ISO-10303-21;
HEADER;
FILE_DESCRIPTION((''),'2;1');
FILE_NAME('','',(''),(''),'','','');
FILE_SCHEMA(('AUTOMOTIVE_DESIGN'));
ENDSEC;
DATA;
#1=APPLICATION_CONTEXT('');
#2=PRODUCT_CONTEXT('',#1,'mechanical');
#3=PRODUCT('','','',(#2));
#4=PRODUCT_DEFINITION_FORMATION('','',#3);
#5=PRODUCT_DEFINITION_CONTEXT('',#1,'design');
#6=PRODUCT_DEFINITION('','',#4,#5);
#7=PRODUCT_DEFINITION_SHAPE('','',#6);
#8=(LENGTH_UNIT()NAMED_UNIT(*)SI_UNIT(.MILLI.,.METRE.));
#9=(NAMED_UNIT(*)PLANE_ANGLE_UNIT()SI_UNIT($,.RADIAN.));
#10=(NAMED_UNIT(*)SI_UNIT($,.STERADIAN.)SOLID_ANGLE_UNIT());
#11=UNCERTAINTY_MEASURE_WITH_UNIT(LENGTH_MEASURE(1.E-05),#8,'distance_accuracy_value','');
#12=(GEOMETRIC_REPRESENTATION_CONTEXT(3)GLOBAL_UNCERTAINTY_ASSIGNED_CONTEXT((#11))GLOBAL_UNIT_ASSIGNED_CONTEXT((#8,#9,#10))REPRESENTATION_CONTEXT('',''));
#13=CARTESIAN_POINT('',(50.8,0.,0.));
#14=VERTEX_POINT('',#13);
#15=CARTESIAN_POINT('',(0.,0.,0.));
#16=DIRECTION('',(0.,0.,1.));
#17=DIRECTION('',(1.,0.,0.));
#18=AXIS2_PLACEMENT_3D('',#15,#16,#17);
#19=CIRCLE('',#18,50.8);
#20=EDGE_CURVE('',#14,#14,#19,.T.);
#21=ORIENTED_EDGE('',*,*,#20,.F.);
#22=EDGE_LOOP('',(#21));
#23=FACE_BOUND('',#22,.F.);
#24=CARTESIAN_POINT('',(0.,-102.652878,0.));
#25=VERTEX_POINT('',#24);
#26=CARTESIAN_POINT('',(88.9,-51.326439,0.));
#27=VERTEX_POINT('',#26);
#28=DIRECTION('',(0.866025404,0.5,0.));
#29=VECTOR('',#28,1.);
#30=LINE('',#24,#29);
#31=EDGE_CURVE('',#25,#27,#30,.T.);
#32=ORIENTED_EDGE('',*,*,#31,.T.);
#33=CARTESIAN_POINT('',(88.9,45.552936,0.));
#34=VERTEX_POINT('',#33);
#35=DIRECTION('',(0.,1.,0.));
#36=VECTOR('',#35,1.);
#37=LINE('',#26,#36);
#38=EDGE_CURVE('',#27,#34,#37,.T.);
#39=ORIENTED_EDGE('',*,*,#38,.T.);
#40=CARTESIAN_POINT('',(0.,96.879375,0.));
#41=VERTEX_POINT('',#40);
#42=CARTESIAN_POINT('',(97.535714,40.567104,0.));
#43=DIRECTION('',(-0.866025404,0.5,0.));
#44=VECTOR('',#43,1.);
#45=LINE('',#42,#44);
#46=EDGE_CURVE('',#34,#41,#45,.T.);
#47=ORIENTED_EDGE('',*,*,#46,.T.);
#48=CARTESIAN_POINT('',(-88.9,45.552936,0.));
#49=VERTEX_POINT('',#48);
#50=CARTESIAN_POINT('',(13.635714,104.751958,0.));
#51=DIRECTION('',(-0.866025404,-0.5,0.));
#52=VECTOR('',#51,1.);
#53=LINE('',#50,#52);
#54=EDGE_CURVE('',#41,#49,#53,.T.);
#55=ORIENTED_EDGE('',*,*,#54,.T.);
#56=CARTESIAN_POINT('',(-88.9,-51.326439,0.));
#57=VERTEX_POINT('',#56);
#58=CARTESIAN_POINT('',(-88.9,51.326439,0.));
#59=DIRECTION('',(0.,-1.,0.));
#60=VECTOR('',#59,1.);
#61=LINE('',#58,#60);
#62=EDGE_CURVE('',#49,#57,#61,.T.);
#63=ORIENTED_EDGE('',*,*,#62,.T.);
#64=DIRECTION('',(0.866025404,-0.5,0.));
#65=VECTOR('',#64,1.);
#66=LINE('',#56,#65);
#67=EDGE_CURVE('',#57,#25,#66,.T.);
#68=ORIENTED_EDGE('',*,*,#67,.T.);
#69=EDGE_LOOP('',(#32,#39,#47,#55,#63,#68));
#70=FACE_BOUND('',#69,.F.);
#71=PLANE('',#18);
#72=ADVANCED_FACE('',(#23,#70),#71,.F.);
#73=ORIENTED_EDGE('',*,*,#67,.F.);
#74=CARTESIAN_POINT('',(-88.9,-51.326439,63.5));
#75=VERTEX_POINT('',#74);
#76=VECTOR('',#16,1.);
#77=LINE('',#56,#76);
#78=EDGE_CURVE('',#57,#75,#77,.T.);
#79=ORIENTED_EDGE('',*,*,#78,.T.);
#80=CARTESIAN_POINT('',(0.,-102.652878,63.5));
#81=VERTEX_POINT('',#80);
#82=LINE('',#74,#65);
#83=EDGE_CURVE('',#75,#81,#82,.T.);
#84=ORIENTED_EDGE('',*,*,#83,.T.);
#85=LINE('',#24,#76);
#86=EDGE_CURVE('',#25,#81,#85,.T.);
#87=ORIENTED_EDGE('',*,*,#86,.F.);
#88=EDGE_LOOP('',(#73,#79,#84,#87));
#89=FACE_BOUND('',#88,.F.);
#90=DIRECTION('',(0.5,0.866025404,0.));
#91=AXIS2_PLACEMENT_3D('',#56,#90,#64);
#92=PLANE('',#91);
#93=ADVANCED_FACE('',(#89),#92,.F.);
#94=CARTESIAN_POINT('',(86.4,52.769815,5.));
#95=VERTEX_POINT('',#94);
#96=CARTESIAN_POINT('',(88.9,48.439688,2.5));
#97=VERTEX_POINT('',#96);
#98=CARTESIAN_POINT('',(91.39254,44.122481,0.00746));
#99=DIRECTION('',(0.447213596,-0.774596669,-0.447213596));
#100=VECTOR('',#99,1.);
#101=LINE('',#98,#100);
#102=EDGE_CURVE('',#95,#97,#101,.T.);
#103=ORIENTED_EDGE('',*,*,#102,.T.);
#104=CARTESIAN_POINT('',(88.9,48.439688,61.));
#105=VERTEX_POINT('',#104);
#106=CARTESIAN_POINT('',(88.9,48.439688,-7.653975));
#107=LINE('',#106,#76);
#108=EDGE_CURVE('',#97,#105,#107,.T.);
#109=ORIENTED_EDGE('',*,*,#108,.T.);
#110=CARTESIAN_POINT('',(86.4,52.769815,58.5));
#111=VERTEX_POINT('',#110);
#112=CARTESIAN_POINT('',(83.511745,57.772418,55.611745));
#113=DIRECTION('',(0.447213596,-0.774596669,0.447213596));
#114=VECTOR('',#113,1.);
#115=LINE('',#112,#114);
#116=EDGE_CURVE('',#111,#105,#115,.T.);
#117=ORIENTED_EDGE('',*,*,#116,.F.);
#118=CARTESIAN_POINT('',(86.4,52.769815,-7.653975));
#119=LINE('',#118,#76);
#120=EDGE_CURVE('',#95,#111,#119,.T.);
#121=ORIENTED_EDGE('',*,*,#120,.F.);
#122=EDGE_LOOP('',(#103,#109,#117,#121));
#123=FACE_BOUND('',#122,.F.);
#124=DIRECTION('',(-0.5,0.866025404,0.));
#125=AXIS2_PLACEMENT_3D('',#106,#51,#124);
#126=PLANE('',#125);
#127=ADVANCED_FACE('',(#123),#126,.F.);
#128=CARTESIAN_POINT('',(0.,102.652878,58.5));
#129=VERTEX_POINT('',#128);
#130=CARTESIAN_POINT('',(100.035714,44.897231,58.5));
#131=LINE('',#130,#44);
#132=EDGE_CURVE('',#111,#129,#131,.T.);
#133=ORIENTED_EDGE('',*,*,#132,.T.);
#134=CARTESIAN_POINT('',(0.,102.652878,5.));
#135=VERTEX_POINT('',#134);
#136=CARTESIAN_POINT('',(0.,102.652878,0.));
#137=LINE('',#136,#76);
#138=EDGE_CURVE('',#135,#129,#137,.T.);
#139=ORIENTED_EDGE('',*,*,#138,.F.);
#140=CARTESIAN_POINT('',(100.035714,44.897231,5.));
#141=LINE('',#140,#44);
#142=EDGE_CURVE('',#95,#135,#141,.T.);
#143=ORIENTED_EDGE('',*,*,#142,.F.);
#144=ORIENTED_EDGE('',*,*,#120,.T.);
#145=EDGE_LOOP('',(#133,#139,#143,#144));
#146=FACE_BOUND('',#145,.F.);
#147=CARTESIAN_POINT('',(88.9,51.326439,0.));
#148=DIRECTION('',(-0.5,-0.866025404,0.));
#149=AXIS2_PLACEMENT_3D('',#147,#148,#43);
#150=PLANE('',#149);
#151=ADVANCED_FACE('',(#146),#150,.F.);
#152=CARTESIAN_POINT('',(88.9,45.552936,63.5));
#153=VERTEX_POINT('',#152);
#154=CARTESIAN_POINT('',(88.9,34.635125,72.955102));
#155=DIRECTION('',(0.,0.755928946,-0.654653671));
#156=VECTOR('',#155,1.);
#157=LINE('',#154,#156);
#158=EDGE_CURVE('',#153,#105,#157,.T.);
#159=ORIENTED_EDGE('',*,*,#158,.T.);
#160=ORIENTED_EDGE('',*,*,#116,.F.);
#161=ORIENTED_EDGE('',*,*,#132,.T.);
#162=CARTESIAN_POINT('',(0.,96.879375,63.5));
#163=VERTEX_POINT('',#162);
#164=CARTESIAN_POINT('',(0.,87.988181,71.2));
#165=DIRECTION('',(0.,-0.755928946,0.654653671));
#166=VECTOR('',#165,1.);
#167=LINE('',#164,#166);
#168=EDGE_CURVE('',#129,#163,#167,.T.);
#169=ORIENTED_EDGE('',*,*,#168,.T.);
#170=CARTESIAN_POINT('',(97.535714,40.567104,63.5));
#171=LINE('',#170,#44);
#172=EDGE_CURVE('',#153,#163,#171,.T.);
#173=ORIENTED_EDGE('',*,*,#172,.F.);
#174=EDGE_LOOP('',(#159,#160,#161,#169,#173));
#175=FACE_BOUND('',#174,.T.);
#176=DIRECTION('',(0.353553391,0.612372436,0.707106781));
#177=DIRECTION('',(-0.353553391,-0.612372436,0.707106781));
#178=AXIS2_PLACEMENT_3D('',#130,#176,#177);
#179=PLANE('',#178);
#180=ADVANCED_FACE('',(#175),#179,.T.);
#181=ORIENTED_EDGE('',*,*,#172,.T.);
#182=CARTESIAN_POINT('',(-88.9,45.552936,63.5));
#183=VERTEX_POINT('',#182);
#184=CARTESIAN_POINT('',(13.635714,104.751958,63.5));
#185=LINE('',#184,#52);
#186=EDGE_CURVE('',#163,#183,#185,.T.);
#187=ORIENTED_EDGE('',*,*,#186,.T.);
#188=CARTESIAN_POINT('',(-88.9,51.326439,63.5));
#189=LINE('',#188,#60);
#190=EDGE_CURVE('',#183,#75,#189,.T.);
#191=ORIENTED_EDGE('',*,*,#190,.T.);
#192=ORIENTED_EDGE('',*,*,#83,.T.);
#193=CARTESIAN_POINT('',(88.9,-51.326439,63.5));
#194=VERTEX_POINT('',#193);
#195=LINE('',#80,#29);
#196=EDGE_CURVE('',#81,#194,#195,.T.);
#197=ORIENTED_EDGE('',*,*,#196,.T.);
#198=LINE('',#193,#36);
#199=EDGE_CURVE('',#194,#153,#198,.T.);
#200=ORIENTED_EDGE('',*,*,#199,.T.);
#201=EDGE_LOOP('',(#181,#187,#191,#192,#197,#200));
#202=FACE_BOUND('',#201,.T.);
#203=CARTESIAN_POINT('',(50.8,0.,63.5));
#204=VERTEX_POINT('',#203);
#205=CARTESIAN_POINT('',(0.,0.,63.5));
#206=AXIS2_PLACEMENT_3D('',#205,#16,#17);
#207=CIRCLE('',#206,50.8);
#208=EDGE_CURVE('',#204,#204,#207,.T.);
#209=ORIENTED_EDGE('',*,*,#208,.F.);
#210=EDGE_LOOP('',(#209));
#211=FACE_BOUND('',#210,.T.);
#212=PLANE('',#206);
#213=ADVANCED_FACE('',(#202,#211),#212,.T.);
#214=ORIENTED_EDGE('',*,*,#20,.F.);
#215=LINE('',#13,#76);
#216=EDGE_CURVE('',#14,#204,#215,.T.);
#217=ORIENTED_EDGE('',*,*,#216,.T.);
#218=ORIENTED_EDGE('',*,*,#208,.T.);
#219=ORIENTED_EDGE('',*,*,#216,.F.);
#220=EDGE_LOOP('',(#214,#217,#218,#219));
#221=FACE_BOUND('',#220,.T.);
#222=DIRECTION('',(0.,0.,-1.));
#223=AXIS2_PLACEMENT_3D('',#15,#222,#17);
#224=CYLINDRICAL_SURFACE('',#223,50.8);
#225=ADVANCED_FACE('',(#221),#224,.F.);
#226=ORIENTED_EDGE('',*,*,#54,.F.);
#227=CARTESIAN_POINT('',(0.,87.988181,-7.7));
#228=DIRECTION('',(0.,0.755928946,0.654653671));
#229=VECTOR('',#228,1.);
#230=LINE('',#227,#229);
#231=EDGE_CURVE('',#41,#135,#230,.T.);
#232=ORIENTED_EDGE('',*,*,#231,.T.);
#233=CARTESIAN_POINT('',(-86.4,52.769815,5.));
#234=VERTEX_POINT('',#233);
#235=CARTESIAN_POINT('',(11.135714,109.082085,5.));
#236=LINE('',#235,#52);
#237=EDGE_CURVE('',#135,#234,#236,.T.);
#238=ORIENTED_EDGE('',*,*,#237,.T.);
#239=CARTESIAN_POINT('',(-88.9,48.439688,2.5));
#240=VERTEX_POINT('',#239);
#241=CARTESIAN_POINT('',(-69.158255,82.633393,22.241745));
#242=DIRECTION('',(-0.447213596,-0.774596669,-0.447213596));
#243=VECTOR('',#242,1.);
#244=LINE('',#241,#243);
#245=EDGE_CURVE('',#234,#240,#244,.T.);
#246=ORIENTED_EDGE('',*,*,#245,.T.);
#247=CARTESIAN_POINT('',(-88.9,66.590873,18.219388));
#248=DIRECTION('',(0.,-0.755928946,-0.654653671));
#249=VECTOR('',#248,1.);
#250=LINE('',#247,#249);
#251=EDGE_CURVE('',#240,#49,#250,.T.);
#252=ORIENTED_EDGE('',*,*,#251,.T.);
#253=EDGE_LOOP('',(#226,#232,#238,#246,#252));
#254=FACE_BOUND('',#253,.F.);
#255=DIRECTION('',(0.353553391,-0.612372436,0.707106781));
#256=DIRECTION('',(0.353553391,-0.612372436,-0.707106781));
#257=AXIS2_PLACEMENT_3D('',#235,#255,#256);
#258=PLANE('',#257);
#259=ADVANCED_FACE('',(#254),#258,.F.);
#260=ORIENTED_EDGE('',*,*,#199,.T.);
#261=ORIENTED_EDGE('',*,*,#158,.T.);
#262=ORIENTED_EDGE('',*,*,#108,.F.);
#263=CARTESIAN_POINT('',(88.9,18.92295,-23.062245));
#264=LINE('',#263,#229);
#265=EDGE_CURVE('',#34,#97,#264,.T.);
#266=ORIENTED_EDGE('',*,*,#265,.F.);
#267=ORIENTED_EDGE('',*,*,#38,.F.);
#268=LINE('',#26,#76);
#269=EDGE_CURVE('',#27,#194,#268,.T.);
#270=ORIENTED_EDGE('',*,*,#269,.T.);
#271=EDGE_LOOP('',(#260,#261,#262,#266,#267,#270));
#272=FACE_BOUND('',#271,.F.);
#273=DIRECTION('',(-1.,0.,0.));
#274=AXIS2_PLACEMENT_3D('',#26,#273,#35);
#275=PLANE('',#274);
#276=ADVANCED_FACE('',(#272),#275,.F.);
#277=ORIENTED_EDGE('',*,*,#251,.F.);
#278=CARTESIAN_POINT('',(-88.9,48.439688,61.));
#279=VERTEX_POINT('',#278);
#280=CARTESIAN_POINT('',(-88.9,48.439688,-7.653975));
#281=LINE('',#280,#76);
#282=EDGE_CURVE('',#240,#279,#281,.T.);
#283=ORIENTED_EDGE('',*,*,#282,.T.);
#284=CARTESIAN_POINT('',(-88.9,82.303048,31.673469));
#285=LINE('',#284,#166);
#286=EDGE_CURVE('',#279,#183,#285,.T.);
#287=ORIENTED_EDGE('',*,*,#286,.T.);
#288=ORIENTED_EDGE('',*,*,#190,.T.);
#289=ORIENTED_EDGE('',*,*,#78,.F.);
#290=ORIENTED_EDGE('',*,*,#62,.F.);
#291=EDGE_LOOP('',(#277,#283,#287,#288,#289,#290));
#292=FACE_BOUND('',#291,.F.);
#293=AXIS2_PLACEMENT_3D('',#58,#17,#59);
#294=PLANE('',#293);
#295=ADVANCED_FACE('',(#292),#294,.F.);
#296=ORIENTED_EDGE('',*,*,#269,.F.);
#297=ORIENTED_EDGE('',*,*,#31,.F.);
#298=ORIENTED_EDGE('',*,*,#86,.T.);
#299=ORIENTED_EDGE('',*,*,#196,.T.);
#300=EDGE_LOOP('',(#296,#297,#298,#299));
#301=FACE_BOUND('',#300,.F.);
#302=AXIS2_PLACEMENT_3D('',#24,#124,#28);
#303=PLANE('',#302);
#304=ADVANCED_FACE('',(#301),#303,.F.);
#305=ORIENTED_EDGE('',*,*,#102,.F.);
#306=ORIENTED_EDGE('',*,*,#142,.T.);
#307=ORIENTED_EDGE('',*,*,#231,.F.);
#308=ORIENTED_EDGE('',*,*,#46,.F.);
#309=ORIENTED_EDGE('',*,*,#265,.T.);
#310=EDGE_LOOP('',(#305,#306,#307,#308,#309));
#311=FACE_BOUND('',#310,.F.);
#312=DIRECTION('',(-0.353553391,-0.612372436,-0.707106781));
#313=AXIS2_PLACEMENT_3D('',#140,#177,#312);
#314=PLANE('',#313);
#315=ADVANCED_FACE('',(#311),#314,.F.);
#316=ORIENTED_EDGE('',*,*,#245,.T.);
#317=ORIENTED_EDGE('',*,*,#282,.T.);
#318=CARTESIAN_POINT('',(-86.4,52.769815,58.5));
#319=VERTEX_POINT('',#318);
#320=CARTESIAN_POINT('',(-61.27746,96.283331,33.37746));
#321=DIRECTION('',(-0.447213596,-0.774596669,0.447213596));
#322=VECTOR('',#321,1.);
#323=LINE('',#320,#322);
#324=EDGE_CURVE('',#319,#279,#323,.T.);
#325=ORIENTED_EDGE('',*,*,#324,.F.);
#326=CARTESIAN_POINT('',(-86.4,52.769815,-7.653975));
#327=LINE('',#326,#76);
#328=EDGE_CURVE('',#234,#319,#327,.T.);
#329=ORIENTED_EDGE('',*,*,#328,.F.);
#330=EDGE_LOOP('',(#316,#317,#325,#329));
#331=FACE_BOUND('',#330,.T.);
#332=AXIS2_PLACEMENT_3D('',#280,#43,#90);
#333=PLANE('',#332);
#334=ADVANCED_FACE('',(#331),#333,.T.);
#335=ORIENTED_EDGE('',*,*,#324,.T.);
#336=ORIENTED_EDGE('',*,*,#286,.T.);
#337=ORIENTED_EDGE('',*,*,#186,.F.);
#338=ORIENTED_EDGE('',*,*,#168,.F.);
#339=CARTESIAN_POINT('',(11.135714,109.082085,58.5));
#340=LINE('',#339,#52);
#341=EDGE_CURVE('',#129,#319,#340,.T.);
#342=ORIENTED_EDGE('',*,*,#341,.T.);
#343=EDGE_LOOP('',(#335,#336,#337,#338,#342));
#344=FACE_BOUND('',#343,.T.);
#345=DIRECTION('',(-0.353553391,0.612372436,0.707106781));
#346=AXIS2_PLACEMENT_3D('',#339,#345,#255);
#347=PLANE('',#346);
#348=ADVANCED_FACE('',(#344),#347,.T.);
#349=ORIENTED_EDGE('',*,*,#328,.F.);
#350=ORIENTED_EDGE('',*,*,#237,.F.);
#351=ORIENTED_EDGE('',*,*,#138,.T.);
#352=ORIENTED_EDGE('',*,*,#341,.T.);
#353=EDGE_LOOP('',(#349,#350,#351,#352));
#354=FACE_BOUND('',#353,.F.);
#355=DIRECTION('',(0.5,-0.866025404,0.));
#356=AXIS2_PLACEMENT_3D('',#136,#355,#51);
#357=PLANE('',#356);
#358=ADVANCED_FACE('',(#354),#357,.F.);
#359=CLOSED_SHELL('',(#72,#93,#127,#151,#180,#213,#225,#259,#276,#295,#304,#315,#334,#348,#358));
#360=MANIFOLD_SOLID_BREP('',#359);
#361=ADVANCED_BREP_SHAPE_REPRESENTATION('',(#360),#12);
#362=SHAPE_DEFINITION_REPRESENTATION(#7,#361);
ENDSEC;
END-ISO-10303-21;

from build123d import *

# Parameters (mm, degrees)
F0_R        = 50.8
F1_DEPTH    = 63.5
F2_T1_DEPTH = 128.3697077416
F2_T3_DEPTH = 128.3697077416
F2_T5_DEPTH = 78.8079500043


# Not quite as in the source:
# - a fillet or chamfer that OpenCascade refuses, or shapes differently, is made with other operations: its cross-section is extruded or revolved along the edge and cut away or added


with BuildPart() as f1:
    # F0 (on Top) → F1 (new body)
    with BuildSketch(Plane.XY):
        Polygon((-88.9, -51.326438931), (0, -102.6528778619), (88.9, -51.326438931), (88.9, 51.326438931), (0, 102.6528778619), (-88.9, 51.326438931), align=None)
        Circle(F0_R, mode=Mode.SUBTRACT)
    extrude(amount=F1_DEPTH)

    # F2: chamfer of 5 on 6 edges, made by hand

    # F2_s2 → F2_t1 (cut)
    with BuildSketch(Plane(origin=(55.5857139903, -32.0924269354, 0), x_dir=(0, 0, 1), z_dir=(-0.8660254038, 0.5, 0))):
        Polygon((58.5, 88.9), (63.5, 83.9), (63.5, 88.9), align=None)
        Polygon((5, 88.9), (0, 83.9), (0, 88.9), align=None)
    extrude(amount=F2_T1_DEPTH, mode=Mode.SUBTRACT)

    # F2_s4 → F2_t3 (cut)
    with BuildSketch(Plane(origin=(55.5857139903, 32.0924269354, 0), x_dir=(0, 0, 1), z_dir=(-0.8660254038, -0.5, 0))):
        Polygon((58.5, 88.9), (63.5, 83.9), (63.5, 88.9), align=None)
        Polygon((5, 88.9), (0, 83.9), (0, 88.9), align=None)
    extrude(amount=F2_T3_DEPTH, mode=Mode.SUBTRACT)

    # F2_s6 → F2_t5 (cut)
    with BuildSketch(Plane.XY.offset(-7.6539750021)):
        Polygon((-88.9, 48.439687585), (-86.4, 52.7698146039), (-88.9, 51.326438931), align=None)
        Polygon((88.9, 48.439687585), (86.4, 52.7698146039), (88.9, 51.326438931), align=None)
    extrude(amount=F2_T5_DEPTH, mode=Mode.SUBTRACT)


solid = f1.part
